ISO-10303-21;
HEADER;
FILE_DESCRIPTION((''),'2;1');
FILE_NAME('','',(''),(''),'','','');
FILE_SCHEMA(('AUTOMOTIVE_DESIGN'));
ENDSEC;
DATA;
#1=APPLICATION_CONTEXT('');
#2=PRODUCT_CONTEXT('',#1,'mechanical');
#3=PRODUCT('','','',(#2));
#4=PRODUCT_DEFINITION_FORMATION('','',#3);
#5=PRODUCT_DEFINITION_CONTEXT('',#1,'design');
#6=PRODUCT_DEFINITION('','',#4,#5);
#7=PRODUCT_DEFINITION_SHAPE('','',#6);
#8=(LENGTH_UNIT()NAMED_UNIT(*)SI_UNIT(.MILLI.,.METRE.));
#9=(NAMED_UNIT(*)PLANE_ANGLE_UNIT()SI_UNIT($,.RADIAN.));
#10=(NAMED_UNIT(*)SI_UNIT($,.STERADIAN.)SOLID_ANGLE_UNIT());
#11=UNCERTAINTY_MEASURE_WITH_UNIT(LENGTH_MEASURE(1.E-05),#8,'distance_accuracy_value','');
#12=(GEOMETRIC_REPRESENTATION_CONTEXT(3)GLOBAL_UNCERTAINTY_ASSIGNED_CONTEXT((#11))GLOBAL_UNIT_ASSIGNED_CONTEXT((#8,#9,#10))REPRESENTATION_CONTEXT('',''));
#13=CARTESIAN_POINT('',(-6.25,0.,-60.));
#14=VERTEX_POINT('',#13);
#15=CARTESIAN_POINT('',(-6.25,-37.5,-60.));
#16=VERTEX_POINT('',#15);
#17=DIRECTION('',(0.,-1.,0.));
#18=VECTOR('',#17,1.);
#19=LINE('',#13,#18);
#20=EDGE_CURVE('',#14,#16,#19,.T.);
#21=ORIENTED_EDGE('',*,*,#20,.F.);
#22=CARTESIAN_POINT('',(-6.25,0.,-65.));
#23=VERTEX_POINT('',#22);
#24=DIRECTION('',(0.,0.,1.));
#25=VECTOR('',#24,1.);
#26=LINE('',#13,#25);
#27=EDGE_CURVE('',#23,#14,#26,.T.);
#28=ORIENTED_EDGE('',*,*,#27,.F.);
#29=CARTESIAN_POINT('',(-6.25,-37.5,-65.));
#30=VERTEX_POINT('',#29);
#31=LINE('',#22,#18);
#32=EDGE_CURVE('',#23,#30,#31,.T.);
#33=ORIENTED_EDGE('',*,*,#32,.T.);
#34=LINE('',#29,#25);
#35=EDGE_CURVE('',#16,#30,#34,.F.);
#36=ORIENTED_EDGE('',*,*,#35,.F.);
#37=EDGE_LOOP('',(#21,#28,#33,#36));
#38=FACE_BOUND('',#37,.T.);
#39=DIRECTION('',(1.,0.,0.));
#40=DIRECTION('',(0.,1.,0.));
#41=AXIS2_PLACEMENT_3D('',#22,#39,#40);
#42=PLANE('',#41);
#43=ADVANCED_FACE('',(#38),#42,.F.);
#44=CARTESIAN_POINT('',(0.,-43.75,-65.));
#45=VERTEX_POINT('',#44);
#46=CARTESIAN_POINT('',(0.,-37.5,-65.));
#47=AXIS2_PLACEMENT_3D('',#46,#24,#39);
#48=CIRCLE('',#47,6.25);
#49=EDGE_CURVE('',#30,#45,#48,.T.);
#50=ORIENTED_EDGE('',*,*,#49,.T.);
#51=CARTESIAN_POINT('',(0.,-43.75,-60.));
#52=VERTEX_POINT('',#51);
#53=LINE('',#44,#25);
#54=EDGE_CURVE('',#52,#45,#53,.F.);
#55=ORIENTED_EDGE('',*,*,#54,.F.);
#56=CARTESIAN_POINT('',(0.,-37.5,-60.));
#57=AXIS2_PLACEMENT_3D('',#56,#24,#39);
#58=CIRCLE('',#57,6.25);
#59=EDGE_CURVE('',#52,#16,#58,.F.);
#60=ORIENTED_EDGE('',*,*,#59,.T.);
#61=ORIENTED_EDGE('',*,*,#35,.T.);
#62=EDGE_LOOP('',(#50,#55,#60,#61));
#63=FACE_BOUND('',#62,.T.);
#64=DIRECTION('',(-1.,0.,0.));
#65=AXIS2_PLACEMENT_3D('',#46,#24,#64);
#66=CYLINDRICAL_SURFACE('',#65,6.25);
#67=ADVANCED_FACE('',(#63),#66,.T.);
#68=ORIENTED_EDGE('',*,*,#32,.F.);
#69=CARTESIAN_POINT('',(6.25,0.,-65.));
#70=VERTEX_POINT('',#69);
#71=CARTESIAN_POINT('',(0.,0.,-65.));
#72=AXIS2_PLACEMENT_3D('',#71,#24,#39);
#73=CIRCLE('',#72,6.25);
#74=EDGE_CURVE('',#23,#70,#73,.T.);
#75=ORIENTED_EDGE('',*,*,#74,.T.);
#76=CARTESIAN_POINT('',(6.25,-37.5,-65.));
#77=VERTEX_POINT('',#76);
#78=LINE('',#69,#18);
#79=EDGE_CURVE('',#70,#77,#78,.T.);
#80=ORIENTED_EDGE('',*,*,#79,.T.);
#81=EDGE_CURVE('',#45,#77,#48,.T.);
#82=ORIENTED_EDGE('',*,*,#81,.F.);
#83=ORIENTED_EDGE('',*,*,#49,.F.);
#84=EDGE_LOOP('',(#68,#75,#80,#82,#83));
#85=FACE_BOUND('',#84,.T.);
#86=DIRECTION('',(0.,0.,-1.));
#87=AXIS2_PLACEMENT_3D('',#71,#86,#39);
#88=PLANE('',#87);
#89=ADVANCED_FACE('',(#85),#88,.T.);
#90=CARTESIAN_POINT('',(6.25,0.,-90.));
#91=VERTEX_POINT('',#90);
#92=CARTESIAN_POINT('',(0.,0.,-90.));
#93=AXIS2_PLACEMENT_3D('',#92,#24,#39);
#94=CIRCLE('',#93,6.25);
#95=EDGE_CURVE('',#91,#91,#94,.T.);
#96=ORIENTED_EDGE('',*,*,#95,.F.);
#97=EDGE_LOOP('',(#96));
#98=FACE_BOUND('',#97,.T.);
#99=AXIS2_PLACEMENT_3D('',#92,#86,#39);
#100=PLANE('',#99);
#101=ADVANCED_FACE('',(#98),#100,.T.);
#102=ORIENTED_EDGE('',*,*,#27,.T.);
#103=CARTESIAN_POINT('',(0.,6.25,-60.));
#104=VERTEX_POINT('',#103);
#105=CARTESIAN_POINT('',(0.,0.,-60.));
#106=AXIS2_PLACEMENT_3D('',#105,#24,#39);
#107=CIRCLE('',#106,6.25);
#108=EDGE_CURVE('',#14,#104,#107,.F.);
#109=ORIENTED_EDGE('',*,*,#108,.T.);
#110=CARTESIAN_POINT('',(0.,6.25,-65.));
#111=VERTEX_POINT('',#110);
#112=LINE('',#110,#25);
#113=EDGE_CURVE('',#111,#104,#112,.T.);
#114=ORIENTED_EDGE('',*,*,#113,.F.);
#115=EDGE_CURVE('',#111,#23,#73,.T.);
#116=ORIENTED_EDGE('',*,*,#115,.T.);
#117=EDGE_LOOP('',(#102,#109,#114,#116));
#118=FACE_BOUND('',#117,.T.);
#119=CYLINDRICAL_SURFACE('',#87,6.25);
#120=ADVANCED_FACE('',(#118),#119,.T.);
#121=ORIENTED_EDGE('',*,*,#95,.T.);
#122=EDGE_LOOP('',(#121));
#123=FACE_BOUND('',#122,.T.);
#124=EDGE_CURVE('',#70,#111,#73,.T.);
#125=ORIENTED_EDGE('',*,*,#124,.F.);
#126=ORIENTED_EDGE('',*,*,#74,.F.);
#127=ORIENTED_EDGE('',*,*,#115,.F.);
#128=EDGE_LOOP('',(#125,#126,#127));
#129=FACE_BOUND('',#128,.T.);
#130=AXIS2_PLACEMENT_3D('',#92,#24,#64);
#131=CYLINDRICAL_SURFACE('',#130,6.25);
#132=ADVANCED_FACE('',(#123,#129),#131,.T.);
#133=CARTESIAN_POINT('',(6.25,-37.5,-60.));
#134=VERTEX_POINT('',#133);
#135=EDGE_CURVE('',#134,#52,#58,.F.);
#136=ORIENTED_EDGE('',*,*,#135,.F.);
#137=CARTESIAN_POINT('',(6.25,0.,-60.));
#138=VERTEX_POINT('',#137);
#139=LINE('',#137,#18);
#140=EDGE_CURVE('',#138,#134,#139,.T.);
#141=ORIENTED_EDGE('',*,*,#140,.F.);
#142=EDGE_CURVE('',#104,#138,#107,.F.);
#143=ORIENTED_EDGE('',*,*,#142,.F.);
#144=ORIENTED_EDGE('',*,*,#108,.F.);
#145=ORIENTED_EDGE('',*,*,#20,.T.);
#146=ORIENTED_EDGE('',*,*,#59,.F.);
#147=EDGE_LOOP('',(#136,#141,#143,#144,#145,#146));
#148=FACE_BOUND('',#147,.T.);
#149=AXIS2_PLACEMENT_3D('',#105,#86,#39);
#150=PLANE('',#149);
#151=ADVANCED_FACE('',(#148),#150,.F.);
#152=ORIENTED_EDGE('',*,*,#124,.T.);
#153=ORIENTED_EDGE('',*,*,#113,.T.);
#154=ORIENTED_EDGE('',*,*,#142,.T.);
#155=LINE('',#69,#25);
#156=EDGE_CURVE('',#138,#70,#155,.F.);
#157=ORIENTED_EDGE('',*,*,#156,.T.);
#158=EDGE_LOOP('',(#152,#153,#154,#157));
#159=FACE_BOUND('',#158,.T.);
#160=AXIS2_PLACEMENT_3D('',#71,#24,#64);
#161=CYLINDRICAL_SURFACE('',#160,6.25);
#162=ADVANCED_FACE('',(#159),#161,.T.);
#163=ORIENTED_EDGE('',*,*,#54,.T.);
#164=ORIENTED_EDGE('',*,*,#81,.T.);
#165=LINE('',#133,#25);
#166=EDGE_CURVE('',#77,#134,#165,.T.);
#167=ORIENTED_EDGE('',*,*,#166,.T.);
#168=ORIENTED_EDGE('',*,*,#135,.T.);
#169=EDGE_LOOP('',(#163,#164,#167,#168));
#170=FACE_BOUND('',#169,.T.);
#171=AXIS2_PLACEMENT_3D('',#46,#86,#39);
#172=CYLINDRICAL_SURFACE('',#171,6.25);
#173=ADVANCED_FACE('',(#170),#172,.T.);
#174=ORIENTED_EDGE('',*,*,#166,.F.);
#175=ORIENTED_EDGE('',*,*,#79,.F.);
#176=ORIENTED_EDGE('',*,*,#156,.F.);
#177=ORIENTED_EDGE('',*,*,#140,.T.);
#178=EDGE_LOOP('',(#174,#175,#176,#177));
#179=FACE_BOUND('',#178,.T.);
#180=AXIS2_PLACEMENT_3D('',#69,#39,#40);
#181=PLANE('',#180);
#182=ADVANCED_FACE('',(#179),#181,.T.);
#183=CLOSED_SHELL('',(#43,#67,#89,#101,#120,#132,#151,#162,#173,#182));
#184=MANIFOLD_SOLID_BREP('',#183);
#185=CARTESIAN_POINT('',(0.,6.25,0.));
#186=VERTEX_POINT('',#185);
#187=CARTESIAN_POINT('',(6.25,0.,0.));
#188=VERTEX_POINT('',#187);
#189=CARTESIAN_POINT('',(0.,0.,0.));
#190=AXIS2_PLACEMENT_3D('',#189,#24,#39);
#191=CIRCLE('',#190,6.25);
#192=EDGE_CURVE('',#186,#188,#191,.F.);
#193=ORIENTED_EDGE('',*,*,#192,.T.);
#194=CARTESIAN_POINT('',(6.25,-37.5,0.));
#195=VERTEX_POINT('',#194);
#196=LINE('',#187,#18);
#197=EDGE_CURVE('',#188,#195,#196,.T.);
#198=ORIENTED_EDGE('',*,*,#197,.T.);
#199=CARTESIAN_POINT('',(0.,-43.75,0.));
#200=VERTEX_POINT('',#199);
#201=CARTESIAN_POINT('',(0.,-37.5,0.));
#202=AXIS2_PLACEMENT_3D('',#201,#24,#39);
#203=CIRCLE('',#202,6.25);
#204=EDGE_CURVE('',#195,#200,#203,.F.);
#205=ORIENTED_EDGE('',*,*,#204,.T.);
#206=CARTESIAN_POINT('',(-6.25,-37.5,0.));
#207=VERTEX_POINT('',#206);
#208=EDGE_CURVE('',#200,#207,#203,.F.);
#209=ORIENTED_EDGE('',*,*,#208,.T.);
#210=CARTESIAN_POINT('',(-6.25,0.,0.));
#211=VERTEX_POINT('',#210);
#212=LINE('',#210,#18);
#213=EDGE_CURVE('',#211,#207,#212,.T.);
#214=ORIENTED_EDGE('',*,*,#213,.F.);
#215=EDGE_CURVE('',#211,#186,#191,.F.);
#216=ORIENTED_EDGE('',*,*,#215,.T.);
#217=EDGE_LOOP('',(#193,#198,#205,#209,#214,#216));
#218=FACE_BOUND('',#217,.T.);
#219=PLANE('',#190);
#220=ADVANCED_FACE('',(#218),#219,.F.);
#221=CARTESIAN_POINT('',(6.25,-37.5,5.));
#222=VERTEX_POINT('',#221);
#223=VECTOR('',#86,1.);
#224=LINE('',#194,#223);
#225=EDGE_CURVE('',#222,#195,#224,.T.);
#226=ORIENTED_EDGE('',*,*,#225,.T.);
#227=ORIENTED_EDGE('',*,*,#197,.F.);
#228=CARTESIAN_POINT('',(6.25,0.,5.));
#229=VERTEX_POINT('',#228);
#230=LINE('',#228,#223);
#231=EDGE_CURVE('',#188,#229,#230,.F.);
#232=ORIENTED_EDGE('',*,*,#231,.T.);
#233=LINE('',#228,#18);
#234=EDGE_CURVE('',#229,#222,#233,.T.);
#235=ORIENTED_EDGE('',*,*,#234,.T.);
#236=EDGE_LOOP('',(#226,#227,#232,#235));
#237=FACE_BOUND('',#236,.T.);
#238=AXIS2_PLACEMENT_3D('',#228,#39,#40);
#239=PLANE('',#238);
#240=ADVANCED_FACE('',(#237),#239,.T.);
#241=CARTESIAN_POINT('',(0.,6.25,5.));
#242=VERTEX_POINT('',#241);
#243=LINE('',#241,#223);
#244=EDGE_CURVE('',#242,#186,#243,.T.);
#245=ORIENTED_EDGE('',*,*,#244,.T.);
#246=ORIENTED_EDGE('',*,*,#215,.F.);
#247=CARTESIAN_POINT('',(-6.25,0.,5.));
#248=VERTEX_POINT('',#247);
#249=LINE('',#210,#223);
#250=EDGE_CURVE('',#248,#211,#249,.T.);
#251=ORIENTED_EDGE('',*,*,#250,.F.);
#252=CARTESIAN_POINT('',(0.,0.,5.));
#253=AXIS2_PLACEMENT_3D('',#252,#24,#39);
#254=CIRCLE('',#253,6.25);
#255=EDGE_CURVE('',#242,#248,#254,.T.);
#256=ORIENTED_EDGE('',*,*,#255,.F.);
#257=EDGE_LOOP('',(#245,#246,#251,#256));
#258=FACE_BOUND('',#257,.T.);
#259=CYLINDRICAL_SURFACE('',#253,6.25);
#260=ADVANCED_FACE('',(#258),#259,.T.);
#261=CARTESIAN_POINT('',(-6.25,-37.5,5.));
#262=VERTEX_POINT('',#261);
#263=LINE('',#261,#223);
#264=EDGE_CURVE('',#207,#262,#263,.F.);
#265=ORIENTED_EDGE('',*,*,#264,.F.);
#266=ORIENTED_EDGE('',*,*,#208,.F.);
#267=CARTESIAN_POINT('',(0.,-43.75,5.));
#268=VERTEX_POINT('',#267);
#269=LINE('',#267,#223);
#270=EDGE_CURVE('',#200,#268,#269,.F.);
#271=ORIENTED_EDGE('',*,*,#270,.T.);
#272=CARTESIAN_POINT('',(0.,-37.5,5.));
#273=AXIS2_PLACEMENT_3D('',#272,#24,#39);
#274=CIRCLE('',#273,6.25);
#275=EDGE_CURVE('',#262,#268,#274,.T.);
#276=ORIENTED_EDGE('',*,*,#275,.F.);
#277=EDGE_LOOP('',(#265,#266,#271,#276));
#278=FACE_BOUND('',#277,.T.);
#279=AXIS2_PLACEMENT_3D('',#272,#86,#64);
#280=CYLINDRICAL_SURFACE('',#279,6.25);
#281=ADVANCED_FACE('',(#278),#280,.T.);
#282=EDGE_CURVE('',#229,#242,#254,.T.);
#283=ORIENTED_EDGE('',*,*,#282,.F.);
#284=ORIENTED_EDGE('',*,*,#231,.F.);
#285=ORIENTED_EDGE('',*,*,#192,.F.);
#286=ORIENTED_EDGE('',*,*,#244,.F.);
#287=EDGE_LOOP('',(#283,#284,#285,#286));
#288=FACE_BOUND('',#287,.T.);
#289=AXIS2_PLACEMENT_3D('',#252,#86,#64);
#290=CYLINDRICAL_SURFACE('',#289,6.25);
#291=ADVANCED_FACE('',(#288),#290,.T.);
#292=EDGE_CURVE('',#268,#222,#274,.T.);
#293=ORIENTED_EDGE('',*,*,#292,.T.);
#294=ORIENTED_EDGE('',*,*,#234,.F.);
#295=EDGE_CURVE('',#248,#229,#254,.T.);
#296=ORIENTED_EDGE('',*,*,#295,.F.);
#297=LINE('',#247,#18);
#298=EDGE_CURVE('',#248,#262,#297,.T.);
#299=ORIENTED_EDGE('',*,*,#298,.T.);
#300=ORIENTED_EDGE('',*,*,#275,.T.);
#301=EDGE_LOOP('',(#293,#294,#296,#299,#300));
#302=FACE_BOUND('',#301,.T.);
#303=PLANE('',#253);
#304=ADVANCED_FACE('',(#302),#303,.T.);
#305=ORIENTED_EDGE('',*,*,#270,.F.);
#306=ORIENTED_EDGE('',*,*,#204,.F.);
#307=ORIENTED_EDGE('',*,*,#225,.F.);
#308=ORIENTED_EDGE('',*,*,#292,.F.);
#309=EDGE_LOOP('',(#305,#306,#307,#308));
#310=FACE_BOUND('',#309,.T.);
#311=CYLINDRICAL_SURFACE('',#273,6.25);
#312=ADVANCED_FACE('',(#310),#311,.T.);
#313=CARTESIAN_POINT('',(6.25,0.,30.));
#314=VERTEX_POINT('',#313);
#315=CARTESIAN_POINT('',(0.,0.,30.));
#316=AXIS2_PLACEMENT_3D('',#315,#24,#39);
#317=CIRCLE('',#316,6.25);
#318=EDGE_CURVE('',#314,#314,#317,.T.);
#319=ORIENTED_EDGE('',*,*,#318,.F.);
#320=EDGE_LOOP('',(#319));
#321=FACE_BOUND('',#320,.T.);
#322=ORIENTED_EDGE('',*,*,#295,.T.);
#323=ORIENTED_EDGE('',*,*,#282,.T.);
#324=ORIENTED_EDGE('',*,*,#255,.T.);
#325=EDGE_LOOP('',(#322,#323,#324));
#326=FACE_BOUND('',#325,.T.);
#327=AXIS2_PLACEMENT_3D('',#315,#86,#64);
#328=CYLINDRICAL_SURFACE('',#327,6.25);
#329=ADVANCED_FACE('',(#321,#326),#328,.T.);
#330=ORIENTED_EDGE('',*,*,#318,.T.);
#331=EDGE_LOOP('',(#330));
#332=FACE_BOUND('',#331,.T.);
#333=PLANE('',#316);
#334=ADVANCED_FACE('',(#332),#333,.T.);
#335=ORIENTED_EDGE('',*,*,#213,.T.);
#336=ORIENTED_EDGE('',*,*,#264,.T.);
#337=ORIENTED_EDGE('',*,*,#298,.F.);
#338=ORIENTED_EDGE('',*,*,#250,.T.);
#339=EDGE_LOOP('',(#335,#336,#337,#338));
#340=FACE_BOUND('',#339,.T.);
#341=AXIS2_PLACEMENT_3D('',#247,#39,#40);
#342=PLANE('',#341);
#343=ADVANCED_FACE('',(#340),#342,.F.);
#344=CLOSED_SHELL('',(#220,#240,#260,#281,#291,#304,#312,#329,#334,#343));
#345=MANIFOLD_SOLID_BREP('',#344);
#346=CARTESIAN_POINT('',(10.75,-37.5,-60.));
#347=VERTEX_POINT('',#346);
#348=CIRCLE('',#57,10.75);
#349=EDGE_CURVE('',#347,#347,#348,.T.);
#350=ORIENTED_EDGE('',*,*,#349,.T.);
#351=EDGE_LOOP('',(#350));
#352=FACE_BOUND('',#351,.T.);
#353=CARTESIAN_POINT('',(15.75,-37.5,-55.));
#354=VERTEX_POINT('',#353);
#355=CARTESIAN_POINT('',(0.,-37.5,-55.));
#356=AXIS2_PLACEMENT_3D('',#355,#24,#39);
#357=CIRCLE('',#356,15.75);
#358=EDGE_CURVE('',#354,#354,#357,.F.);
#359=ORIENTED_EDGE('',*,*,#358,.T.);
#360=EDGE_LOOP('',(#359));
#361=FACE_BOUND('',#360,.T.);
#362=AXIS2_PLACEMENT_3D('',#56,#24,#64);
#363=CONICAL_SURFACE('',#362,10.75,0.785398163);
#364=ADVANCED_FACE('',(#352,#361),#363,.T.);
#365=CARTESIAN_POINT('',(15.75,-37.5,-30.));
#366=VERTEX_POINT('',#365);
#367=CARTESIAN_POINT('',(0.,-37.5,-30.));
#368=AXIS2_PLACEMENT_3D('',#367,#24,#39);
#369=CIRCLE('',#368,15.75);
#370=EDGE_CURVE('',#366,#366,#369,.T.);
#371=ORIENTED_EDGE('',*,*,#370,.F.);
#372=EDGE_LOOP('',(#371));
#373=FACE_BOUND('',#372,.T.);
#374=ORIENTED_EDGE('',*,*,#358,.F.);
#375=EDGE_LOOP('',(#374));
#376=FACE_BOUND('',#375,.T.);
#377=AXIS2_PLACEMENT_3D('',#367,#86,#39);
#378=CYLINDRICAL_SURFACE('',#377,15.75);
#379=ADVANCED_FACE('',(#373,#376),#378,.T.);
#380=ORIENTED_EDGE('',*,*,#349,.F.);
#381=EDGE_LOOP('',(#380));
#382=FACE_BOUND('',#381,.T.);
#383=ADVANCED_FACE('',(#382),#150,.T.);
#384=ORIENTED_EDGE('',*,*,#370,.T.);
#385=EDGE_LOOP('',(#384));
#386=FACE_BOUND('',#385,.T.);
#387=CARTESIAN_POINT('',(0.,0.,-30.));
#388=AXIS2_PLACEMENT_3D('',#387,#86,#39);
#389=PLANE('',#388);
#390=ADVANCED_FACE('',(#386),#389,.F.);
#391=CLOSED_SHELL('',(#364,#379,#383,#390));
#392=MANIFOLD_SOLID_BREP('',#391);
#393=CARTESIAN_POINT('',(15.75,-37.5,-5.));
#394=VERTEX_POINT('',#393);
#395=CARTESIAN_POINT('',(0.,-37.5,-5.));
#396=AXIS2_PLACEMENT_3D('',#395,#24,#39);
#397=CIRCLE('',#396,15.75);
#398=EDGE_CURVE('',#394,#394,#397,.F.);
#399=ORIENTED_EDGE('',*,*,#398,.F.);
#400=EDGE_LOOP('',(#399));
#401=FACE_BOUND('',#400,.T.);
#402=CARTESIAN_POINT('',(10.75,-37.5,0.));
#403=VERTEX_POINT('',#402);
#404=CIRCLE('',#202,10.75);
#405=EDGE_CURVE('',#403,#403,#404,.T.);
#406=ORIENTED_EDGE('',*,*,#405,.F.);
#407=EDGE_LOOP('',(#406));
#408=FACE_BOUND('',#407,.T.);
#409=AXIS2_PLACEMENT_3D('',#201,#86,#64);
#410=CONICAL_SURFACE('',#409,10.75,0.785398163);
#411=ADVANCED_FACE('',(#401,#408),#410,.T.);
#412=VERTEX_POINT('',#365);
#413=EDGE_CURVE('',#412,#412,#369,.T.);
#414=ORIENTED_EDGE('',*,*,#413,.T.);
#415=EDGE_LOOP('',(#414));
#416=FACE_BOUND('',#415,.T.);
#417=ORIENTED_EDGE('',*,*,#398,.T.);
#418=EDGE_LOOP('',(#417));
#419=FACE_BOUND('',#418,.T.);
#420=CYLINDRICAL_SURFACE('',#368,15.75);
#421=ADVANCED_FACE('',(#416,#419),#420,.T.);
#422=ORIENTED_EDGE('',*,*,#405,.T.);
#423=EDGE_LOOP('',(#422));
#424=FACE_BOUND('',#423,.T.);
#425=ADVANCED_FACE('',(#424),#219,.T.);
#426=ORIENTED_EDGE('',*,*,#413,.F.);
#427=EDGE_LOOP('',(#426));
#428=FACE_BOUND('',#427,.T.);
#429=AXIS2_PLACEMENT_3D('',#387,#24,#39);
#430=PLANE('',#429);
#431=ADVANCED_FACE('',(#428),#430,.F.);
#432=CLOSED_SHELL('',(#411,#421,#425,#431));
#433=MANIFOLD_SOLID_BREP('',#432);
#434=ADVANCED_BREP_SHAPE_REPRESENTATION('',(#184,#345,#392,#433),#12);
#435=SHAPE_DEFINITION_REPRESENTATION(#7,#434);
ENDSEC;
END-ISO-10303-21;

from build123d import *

# Parameters (mm, degrees)
SKETCH1_R           = 6.25
BOSS_EXTRUDE1_DEPTH = 30
SKETCH1_3_W         = 12.5
SKETCH1_3_H         = 50
BOSS_EXTRUDE2_DEPTH = 5
BOSS_EXTRUDE3_DEPTH = 30
CHAMFER1_SIZE       = 5
FILLET1_R           = 6.25


with BuildPart() as part:
    # Sketch1 → Boss-Extrude1 (new body)
    with BuildSketch(Plane.XY):
        Circle(SKETCH1_R)
    extrude(amount=BOSS_EXTRUDE1_DEPTH)

    # Sketch1<3> → Boss-Extrude2 (add)
    with BuildSketch(Plane.XY):
        with Locations((0, -18.75)):
            Rectangle(SKETCH1_3_W, SKETCH1_3_H)
    extrude(amount=BOSS_EXTRUDE2_DEPTH)

    # Fillet1
    fillet1_edges = [part.edges().sort_by_distance(p)[0] for p in [
        (-6.25, -43.75, 2.5),
        (-6.25, 6.25, 2.5),
        (6.25, -43.75, 2.5),
        (6.25, 6.25, 2.5),
    ]]
    fillet(fillet1_edges, radius=FILLET1_R - 0.0001)  # a hair under: the kernel refuses the full size


with BuildPart() as body_2:
    # Sketch1<4> → Boss-Extrude3 (new body)
    with BuildSketch(Plane.XY):
        with BuildLine():
            ThreePointArc((6.25, -23.043167705), (0, -21.75), (-6.25, -23.043167705))
            Line((-6.25, -23.043167705), (-6.25, -43.75))
            Line((-6.25, -43.75), (6.25, -43.75))
            Line((6.25, -43.75), (6.25, -23.043167705))
        make_face()
        with BuildLine():
            Line((-6.25, -43.75), (-6.25, -23.043167705))
            ThreePointArc((-6.25, -23.043167705), (-8.649421946, -50.662446581), (15.75, -37.5))
            ThreePointArc((15.75, -37.5), (13.162446581, -28.850578054), (6.25, -23.043167705))
            Line((6.25, -23.043167705), (6.25, -43.75))
            Line((6.25, -43.75), (-6.25, -43.75))
        make_face()
    extrude(amount=-BOSS_EXTRUDE3_DEPTH)

    # Chamfer1
    chamfer1_edges = [body_2.edges().sort_by_distance(p)[0] for p in [
        (-15.75, -37.5, 0),
    ]]
    chamfer(chamfer1_edges, length=CHAMFER1_SIZE)


with BuildPart() as body_3:
    # Mirror1: mirrored copy
    add(body_2.part.mirror(Plane(origin=(0, 0, -30), x_dir=(1, 0, 0), z_dir=(0, 0, -1))))


with BuildPart() as body_4:
    # Mirror1 2: mirrored copy
    add(part.part.mirror(Plane(origin=(0, 0, -30), x_dir=(1, 0, 0), z_dir=(0, 0, -1))))


solid = Compound([part.part, body_2.part, body_3.part, body_4.part])
